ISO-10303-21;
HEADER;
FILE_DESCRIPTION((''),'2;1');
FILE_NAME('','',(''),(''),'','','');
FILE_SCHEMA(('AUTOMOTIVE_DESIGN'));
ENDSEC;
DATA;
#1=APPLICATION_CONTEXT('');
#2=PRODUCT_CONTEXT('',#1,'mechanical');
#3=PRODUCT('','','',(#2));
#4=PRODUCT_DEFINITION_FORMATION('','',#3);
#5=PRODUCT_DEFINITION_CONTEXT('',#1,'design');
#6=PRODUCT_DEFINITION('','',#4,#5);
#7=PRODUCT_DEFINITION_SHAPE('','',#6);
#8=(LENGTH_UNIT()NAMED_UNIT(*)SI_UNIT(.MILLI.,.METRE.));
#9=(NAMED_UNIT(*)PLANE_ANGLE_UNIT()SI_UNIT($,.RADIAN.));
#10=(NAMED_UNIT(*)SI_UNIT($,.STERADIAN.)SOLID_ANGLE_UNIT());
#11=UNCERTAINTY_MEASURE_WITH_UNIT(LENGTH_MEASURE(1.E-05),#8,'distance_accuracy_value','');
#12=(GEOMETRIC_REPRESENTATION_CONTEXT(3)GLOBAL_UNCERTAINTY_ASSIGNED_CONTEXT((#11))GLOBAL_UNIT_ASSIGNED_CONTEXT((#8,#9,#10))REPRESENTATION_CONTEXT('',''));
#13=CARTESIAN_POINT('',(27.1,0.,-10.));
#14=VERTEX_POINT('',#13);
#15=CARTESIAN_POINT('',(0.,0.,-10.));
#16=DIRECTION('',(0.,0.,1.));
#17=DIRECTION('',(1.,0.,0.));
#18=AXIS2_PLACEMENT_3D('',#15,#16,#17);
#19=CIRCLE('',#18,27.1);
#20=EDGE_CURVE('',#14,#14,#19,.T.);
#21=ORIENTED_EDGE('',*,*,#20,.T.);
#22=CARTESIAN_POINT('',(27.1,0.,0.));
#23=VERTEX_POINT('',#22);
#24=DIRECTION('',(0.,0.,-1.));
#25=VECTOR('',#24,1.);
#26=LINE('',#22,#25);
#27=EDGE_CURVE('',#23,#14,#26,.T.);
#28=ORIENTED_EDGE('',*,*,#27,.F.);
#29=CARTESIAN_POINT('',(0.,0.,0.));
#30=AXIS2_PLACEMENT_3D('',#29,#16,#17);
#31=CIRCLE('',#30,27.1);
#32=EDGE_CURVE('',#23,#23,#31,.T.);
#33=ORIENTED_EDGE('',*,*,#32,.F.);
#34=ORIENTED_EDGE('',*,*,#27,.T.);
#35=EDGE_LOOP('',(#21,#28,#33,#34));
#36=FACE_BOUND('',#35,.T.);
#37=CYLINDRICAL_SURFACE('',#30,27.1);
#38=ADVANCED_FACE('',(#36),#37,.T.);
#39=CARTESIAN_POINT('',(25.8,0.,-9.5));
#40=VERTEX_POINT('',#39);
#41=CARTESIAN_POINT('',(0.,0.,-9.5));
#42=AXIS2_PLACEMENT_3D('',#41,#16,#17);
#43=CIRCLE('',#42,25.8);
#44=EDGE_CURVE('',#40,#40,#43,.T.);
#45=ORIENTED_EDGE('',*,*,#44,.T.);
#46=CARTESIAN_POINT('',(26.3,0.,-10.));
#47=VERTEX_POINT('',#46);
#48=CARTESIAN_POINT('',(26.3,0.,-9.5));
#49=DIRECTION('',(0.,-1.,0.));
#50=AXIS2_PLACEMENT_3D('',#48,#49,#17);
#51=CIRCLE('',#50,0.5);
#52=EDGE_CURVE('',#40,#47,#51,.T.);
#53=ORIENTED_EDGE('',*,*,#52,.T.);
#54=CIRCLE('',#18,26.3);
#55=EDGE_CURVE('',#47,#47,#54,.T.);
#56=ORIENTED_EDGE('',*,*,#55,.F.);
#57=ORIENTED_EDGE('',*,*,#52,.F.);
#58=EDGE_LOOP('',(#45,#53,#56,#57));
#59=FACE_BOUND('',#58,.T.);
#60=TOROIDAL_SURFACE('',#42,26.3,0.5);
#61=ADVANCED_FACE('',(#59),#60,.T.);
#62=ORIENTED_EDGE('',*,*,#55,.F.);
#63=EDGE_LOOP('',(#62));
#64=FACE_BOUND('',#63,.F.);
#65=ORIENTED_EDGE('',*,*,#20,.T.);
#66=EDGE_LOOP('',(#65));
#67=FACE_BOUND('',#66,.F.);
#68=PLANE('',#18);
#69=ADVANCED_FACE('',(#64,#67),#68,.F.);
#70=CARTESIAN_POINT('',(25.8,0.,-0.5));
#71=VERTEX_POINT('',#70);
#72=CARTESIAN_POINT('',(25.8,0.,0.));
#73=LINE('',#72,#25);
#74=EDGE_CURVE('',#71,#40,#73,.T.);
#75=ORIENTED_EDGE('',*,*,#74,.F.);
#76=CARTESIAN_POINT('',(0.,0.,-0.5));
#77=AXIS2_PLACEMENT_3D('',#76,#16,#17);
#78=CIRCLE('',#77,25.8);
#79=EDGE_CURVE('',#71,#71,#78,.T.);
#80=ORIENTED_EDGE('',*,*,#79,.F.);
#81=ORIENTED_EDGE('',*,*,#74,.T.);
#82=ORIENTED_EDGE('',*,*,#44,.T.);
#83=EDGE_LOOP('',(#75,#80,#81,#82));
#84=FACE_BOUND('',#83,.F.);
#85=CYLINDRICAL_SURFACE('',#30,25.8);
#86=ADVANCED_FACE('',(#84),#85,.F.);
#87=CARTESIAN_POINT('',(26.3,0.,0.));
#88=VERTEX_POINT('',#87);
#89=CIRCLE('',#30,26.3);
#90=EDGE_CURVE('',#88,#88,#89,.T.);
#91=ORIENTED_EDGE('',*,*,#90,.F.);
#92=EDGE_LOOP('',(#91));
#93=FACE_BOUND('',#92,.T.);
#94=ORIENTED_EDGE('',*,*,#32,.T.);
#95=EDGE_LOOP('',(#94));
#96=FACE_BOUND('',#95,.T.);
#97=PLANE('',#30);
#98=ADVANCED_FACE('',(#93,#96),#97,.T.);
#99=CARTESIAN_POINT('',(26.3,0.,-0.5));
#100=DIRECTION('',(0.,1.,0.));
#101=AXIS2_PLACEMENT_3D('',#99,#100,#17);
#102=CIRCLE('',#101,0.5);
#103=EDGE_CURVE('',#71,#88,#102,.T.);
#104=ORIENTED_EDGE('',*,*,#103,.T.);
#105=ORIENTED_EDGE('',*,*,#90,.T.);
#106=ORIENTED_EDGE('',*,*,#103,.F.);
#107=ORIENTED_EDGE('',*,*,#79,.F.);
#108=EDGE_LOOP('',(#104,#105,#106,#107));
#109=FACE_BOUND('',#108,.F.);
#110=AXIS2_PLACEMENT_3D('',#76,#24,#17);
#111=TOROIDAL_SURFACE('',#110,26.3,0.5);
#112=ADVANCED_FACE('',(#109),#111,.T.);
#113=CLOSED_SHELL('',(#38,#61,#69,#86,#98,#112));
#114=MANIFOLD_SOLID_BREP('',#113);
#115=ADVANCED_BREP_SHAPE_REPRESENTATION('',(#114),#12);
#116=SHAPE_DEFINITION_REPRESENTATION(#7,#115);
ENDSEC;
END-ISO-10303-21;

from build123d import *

# Parameters (mm, degrees)
F0_R     = 27.1
F0_R_2   = 25.8
F1_DEPTH = 10
F2_R     = 0.5


# Not quite as in the source:
# - a feature names something its author has since deleted; it is built from what else it names


with BuildPart() as f1:
    # F0 (on Top) → F1 (new body)
    with BuildSketch(Plane.XY):
        Circle(F0_R)
        Circle(F0_R_2, mode=Mode.SUBTRACT)
    extrude(amount=-F1_DEPTH)

    # F2
    f2_edges = [f1.edges().sort_by_distance(p)[0] for p in [
        (-25.8, 0, 0),
        (-25.8, 0, -10),
    ]]
    fillet(f2_edges, radius=F2_R)


solid = f1.part
